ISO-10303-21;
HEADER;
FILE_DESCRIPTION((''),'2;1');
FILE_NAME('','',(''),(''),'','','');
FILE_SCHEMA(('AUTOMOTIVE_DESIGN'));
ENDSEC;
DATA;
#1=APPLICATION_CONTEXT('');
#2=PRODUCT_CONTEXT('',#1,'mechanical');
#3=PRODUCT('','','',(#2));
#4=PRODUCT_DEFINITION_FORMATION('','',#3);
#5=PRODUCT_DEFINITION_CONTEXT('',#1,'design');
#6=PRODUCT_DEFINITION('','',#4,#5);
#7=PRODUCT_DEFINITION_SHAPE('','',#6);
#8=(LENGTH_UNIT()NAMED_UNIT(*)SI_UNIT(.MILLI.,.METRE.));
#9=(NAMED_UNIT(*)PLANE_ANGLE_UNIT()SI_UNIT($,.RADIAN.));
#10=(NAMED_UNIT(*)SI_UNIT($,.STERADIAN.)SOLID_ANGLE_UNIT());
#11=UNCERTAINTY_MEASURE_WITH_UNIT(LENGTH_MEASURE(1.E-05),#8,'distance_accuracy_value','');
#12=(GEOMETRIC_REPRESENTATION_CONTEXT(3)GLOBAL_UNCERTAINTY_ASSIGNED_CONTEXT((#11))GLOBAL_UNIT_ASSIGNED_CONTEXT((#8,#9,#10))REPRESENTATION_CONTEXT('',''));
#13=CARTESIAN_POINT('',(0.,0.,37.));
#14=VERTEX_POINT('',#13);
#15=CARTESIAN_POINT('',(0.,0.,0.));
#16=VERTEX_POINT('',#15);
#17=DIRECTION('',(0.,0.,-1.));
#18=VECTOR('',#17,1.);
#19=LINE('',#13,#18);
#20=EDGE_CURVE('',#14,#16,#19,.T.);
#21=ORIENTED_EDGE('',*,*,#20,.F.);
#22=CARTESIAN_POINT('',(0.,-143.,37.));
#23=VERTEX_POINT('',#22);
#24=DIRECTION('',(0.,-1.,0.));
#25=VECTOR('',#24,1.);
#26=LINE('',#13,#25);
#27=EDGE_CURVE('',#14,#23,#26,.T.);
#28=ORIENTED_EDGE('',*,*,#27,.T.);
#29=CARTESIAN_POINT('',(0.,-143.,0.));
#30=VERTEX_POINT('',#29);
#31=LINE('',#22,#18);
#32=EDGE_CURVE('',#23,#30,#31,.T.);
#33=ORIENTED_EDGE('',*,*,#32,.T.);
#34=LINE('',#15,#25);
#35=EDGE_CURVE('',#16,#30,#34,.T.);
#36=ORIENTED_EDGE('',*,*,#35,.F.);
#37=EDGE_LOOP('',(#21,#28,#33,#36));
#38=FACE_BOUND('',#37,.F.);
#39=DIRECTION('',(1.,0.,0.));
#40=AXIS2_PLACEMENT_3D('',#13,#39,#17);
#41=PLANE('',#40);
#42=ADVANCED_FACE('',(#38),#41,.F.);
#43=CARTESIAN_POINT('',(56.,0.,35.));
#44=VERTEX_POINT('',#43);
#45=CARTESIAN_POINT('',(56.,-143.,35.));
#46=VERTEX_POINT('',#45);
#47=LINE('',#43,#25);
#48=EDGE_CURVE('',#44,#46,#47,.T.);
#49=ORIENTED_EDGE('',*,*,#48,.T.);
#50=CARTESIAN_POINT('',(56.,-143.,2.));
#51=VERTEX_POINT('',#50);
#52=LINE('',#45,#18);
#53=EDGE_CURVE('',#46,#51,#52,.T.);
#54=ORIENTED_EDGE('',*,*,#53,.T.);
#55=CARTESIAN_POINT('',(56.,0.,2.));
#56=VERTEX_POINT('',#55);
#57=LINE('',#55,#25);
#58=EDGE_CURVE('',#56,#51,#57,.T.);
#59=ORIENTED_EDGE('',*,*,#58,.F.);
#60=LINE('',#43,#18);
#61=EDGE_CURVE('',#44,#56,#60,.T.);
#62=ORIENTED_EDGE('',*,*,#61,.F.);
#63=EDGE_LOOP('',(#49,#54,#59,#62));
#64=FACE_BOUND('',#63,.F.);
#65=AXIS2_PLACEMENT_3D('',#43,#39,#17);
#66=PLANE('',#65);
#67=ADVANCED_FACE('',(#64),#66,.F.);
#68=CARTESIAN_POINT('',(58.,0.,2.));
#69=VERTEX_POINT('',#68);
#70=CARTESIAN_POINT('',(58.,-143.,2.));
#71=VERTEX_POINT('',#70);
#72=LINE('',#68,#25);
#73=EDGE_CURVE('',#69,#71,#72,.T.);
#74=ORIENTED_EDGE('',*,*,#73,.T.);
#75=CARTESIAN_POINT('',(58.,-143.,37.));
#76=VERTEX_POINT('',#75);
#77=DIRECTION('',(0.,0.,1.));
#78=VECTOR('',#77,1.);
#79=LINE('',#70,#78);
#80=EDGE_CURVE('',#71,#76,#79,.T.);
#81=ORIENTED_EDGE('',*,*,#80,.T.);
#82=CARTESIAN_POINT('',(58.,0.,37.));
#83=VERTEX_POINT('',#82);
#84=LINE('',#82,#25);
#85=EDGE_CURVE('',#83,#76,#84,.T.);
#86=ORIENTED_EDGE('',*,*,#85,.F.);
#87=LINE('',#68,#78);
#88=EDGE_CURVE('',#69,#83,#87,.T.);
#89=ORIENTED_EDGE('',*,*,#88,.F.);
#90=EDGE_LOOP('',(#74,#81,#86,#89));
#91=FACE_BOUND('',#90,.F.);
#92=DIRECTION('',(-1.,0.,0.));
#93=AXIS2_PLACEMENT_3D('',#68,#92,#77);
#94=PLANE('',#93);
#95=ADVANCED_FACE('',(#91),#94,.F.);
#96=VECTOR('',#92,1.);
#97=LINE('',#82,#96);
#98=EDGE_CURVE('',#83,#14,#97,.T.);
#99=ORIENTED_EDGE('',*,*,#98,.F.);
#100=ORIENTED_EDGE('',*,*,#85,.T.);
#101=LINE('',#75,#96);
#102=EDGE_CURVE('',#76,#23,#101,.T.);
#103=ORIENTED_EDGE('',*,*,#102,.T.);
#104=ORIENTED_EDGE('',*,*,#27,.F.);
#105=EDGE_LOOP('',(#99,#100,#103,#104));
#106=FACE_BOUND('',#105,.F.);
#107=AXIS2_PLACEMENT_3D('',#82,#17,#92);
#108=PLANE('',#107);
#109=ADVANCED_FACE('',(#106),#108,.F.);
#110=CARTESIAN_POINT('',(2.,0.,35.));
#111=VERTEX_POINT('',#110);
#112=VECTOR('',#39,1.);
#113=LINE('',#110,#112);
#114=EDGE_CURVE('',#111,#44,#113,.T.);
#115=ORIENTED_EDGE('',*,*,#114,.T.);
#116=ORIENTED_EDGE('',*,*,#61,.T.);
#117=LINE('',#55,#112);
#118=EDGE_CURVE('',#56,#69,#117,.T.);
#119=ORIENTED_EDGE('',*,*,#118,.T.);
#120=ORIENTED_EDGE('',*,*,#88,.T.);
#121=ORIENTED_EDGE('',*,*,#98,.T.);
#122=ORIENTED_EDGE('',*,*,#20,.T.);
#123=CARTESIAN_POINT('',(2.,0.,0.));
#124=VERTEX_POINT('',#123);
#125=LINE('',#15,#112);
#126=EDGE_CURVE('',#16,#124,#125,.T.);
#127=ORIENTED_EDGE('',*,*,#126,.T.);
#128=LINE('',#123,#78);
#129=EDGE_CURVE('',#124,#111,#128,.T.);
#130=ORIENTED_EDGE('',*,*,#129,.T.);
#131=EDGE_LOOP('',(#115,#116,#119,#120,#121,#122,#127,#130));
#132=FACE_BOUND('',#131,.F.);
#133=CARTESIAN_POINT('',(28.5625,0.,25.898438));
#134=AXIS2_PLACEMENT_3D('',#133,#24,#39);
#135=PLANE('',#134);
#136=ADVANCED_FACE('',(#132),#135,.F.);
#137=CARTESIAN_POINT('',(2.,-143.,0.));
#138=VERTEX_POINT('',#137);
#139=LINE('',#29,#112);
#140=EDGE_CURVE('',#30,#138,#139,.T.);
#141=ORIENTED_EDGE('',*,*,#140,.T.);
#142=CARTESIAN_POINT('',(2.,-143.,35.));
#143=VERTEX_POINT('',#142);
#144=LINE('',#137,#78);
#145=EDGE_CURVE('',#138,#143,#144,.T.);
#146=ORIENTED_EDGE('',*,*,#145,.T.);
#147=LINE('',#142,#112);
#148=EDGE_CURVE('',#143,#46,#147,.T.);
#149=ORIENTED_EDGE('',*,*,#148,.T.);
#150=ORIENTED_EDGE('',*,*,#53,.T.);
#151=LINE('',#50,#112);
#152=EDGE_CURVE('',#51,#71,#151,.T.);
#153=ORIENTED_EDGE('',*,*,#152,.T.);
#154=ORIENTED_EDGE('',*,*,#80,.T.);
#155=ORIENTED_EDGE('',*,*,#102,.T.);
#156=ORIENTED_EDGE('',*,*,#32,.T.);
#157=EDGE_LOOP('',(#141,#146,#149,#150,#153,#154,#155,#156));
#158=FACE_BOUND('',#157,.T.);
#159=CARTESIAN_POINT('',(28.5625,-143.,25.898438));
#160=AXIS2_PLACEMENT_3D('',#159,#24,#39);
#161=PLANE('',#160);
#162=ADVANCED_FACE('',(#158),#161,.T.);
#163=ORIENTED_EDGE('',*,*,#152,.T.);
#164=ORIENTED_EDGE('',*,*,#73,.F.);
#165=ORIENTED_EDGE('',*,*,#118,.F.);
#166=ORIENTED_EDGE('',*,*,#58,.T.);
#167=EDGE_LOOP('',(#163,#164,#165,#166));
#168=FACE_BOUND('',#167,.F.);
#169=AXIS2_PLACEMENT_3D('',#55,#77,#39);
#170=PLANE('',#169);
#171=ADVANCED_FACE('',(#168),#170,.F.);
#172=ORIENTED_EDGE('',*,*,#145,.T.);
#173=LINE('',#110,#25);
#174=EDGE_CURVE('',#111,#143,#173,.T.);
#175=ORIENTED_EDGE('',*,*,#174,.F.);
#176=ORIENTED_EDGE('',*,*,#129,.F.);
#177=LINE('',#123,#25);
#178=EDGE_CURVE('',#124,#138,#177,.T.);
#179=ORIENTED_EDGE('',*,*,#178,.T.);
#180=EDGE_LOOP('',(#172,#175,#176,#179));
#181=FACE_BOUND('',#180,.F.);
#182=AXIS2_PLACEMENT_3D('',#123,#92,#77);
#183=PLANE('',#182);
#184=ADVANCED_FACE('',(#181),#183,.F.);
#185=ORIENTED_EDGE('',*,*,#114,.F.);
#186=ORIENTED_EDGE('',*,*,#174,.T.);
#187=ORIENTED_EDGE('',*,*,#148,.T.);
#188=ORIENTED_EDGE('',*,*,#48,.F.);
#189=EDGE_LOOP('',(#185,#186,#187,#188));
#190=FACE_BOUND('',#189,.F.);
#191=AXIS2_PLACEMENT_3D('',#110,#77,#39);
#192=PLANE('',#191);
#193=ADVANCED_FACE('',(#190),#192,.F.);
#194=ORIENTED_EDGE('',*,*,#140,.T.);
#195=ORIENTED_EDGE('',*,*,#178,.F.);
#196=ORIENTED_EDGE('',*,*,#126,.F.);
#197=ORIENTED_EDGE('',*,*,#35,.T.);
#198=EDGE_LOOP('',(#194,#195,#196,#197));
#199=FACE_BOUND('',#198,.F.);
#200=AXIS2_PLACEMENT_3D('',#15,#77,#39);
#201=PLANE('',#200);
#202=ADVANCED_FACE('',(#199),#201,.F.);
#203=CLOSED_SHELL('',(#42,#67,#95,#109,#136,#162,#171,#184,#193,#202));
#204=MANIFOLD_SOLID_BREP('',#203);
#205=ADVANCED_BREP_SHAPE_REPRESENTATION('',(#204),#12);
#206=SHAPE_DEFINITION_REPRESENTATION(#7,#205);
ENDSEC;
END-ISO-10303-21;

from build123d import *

# Parameters (mm, degrees)
F1_DEPTH = 143


# Not quite as in the source:
# - the program builds the solid bodies; features that only make, move or delete a surface that nothing else refers to are left out


with BuildPart() as f1:
    # F0 (on Front) → F1 (new body)
    with BuildSketch(Plane.XZ):
        Polygon((0, 0), (2, 0), (2, 35), (56, 35), (56, 2), (58, 2), (58, 37), (0, 37), align=None)
    extrude(amount=F1_DEPTH)


solid = f1.part
